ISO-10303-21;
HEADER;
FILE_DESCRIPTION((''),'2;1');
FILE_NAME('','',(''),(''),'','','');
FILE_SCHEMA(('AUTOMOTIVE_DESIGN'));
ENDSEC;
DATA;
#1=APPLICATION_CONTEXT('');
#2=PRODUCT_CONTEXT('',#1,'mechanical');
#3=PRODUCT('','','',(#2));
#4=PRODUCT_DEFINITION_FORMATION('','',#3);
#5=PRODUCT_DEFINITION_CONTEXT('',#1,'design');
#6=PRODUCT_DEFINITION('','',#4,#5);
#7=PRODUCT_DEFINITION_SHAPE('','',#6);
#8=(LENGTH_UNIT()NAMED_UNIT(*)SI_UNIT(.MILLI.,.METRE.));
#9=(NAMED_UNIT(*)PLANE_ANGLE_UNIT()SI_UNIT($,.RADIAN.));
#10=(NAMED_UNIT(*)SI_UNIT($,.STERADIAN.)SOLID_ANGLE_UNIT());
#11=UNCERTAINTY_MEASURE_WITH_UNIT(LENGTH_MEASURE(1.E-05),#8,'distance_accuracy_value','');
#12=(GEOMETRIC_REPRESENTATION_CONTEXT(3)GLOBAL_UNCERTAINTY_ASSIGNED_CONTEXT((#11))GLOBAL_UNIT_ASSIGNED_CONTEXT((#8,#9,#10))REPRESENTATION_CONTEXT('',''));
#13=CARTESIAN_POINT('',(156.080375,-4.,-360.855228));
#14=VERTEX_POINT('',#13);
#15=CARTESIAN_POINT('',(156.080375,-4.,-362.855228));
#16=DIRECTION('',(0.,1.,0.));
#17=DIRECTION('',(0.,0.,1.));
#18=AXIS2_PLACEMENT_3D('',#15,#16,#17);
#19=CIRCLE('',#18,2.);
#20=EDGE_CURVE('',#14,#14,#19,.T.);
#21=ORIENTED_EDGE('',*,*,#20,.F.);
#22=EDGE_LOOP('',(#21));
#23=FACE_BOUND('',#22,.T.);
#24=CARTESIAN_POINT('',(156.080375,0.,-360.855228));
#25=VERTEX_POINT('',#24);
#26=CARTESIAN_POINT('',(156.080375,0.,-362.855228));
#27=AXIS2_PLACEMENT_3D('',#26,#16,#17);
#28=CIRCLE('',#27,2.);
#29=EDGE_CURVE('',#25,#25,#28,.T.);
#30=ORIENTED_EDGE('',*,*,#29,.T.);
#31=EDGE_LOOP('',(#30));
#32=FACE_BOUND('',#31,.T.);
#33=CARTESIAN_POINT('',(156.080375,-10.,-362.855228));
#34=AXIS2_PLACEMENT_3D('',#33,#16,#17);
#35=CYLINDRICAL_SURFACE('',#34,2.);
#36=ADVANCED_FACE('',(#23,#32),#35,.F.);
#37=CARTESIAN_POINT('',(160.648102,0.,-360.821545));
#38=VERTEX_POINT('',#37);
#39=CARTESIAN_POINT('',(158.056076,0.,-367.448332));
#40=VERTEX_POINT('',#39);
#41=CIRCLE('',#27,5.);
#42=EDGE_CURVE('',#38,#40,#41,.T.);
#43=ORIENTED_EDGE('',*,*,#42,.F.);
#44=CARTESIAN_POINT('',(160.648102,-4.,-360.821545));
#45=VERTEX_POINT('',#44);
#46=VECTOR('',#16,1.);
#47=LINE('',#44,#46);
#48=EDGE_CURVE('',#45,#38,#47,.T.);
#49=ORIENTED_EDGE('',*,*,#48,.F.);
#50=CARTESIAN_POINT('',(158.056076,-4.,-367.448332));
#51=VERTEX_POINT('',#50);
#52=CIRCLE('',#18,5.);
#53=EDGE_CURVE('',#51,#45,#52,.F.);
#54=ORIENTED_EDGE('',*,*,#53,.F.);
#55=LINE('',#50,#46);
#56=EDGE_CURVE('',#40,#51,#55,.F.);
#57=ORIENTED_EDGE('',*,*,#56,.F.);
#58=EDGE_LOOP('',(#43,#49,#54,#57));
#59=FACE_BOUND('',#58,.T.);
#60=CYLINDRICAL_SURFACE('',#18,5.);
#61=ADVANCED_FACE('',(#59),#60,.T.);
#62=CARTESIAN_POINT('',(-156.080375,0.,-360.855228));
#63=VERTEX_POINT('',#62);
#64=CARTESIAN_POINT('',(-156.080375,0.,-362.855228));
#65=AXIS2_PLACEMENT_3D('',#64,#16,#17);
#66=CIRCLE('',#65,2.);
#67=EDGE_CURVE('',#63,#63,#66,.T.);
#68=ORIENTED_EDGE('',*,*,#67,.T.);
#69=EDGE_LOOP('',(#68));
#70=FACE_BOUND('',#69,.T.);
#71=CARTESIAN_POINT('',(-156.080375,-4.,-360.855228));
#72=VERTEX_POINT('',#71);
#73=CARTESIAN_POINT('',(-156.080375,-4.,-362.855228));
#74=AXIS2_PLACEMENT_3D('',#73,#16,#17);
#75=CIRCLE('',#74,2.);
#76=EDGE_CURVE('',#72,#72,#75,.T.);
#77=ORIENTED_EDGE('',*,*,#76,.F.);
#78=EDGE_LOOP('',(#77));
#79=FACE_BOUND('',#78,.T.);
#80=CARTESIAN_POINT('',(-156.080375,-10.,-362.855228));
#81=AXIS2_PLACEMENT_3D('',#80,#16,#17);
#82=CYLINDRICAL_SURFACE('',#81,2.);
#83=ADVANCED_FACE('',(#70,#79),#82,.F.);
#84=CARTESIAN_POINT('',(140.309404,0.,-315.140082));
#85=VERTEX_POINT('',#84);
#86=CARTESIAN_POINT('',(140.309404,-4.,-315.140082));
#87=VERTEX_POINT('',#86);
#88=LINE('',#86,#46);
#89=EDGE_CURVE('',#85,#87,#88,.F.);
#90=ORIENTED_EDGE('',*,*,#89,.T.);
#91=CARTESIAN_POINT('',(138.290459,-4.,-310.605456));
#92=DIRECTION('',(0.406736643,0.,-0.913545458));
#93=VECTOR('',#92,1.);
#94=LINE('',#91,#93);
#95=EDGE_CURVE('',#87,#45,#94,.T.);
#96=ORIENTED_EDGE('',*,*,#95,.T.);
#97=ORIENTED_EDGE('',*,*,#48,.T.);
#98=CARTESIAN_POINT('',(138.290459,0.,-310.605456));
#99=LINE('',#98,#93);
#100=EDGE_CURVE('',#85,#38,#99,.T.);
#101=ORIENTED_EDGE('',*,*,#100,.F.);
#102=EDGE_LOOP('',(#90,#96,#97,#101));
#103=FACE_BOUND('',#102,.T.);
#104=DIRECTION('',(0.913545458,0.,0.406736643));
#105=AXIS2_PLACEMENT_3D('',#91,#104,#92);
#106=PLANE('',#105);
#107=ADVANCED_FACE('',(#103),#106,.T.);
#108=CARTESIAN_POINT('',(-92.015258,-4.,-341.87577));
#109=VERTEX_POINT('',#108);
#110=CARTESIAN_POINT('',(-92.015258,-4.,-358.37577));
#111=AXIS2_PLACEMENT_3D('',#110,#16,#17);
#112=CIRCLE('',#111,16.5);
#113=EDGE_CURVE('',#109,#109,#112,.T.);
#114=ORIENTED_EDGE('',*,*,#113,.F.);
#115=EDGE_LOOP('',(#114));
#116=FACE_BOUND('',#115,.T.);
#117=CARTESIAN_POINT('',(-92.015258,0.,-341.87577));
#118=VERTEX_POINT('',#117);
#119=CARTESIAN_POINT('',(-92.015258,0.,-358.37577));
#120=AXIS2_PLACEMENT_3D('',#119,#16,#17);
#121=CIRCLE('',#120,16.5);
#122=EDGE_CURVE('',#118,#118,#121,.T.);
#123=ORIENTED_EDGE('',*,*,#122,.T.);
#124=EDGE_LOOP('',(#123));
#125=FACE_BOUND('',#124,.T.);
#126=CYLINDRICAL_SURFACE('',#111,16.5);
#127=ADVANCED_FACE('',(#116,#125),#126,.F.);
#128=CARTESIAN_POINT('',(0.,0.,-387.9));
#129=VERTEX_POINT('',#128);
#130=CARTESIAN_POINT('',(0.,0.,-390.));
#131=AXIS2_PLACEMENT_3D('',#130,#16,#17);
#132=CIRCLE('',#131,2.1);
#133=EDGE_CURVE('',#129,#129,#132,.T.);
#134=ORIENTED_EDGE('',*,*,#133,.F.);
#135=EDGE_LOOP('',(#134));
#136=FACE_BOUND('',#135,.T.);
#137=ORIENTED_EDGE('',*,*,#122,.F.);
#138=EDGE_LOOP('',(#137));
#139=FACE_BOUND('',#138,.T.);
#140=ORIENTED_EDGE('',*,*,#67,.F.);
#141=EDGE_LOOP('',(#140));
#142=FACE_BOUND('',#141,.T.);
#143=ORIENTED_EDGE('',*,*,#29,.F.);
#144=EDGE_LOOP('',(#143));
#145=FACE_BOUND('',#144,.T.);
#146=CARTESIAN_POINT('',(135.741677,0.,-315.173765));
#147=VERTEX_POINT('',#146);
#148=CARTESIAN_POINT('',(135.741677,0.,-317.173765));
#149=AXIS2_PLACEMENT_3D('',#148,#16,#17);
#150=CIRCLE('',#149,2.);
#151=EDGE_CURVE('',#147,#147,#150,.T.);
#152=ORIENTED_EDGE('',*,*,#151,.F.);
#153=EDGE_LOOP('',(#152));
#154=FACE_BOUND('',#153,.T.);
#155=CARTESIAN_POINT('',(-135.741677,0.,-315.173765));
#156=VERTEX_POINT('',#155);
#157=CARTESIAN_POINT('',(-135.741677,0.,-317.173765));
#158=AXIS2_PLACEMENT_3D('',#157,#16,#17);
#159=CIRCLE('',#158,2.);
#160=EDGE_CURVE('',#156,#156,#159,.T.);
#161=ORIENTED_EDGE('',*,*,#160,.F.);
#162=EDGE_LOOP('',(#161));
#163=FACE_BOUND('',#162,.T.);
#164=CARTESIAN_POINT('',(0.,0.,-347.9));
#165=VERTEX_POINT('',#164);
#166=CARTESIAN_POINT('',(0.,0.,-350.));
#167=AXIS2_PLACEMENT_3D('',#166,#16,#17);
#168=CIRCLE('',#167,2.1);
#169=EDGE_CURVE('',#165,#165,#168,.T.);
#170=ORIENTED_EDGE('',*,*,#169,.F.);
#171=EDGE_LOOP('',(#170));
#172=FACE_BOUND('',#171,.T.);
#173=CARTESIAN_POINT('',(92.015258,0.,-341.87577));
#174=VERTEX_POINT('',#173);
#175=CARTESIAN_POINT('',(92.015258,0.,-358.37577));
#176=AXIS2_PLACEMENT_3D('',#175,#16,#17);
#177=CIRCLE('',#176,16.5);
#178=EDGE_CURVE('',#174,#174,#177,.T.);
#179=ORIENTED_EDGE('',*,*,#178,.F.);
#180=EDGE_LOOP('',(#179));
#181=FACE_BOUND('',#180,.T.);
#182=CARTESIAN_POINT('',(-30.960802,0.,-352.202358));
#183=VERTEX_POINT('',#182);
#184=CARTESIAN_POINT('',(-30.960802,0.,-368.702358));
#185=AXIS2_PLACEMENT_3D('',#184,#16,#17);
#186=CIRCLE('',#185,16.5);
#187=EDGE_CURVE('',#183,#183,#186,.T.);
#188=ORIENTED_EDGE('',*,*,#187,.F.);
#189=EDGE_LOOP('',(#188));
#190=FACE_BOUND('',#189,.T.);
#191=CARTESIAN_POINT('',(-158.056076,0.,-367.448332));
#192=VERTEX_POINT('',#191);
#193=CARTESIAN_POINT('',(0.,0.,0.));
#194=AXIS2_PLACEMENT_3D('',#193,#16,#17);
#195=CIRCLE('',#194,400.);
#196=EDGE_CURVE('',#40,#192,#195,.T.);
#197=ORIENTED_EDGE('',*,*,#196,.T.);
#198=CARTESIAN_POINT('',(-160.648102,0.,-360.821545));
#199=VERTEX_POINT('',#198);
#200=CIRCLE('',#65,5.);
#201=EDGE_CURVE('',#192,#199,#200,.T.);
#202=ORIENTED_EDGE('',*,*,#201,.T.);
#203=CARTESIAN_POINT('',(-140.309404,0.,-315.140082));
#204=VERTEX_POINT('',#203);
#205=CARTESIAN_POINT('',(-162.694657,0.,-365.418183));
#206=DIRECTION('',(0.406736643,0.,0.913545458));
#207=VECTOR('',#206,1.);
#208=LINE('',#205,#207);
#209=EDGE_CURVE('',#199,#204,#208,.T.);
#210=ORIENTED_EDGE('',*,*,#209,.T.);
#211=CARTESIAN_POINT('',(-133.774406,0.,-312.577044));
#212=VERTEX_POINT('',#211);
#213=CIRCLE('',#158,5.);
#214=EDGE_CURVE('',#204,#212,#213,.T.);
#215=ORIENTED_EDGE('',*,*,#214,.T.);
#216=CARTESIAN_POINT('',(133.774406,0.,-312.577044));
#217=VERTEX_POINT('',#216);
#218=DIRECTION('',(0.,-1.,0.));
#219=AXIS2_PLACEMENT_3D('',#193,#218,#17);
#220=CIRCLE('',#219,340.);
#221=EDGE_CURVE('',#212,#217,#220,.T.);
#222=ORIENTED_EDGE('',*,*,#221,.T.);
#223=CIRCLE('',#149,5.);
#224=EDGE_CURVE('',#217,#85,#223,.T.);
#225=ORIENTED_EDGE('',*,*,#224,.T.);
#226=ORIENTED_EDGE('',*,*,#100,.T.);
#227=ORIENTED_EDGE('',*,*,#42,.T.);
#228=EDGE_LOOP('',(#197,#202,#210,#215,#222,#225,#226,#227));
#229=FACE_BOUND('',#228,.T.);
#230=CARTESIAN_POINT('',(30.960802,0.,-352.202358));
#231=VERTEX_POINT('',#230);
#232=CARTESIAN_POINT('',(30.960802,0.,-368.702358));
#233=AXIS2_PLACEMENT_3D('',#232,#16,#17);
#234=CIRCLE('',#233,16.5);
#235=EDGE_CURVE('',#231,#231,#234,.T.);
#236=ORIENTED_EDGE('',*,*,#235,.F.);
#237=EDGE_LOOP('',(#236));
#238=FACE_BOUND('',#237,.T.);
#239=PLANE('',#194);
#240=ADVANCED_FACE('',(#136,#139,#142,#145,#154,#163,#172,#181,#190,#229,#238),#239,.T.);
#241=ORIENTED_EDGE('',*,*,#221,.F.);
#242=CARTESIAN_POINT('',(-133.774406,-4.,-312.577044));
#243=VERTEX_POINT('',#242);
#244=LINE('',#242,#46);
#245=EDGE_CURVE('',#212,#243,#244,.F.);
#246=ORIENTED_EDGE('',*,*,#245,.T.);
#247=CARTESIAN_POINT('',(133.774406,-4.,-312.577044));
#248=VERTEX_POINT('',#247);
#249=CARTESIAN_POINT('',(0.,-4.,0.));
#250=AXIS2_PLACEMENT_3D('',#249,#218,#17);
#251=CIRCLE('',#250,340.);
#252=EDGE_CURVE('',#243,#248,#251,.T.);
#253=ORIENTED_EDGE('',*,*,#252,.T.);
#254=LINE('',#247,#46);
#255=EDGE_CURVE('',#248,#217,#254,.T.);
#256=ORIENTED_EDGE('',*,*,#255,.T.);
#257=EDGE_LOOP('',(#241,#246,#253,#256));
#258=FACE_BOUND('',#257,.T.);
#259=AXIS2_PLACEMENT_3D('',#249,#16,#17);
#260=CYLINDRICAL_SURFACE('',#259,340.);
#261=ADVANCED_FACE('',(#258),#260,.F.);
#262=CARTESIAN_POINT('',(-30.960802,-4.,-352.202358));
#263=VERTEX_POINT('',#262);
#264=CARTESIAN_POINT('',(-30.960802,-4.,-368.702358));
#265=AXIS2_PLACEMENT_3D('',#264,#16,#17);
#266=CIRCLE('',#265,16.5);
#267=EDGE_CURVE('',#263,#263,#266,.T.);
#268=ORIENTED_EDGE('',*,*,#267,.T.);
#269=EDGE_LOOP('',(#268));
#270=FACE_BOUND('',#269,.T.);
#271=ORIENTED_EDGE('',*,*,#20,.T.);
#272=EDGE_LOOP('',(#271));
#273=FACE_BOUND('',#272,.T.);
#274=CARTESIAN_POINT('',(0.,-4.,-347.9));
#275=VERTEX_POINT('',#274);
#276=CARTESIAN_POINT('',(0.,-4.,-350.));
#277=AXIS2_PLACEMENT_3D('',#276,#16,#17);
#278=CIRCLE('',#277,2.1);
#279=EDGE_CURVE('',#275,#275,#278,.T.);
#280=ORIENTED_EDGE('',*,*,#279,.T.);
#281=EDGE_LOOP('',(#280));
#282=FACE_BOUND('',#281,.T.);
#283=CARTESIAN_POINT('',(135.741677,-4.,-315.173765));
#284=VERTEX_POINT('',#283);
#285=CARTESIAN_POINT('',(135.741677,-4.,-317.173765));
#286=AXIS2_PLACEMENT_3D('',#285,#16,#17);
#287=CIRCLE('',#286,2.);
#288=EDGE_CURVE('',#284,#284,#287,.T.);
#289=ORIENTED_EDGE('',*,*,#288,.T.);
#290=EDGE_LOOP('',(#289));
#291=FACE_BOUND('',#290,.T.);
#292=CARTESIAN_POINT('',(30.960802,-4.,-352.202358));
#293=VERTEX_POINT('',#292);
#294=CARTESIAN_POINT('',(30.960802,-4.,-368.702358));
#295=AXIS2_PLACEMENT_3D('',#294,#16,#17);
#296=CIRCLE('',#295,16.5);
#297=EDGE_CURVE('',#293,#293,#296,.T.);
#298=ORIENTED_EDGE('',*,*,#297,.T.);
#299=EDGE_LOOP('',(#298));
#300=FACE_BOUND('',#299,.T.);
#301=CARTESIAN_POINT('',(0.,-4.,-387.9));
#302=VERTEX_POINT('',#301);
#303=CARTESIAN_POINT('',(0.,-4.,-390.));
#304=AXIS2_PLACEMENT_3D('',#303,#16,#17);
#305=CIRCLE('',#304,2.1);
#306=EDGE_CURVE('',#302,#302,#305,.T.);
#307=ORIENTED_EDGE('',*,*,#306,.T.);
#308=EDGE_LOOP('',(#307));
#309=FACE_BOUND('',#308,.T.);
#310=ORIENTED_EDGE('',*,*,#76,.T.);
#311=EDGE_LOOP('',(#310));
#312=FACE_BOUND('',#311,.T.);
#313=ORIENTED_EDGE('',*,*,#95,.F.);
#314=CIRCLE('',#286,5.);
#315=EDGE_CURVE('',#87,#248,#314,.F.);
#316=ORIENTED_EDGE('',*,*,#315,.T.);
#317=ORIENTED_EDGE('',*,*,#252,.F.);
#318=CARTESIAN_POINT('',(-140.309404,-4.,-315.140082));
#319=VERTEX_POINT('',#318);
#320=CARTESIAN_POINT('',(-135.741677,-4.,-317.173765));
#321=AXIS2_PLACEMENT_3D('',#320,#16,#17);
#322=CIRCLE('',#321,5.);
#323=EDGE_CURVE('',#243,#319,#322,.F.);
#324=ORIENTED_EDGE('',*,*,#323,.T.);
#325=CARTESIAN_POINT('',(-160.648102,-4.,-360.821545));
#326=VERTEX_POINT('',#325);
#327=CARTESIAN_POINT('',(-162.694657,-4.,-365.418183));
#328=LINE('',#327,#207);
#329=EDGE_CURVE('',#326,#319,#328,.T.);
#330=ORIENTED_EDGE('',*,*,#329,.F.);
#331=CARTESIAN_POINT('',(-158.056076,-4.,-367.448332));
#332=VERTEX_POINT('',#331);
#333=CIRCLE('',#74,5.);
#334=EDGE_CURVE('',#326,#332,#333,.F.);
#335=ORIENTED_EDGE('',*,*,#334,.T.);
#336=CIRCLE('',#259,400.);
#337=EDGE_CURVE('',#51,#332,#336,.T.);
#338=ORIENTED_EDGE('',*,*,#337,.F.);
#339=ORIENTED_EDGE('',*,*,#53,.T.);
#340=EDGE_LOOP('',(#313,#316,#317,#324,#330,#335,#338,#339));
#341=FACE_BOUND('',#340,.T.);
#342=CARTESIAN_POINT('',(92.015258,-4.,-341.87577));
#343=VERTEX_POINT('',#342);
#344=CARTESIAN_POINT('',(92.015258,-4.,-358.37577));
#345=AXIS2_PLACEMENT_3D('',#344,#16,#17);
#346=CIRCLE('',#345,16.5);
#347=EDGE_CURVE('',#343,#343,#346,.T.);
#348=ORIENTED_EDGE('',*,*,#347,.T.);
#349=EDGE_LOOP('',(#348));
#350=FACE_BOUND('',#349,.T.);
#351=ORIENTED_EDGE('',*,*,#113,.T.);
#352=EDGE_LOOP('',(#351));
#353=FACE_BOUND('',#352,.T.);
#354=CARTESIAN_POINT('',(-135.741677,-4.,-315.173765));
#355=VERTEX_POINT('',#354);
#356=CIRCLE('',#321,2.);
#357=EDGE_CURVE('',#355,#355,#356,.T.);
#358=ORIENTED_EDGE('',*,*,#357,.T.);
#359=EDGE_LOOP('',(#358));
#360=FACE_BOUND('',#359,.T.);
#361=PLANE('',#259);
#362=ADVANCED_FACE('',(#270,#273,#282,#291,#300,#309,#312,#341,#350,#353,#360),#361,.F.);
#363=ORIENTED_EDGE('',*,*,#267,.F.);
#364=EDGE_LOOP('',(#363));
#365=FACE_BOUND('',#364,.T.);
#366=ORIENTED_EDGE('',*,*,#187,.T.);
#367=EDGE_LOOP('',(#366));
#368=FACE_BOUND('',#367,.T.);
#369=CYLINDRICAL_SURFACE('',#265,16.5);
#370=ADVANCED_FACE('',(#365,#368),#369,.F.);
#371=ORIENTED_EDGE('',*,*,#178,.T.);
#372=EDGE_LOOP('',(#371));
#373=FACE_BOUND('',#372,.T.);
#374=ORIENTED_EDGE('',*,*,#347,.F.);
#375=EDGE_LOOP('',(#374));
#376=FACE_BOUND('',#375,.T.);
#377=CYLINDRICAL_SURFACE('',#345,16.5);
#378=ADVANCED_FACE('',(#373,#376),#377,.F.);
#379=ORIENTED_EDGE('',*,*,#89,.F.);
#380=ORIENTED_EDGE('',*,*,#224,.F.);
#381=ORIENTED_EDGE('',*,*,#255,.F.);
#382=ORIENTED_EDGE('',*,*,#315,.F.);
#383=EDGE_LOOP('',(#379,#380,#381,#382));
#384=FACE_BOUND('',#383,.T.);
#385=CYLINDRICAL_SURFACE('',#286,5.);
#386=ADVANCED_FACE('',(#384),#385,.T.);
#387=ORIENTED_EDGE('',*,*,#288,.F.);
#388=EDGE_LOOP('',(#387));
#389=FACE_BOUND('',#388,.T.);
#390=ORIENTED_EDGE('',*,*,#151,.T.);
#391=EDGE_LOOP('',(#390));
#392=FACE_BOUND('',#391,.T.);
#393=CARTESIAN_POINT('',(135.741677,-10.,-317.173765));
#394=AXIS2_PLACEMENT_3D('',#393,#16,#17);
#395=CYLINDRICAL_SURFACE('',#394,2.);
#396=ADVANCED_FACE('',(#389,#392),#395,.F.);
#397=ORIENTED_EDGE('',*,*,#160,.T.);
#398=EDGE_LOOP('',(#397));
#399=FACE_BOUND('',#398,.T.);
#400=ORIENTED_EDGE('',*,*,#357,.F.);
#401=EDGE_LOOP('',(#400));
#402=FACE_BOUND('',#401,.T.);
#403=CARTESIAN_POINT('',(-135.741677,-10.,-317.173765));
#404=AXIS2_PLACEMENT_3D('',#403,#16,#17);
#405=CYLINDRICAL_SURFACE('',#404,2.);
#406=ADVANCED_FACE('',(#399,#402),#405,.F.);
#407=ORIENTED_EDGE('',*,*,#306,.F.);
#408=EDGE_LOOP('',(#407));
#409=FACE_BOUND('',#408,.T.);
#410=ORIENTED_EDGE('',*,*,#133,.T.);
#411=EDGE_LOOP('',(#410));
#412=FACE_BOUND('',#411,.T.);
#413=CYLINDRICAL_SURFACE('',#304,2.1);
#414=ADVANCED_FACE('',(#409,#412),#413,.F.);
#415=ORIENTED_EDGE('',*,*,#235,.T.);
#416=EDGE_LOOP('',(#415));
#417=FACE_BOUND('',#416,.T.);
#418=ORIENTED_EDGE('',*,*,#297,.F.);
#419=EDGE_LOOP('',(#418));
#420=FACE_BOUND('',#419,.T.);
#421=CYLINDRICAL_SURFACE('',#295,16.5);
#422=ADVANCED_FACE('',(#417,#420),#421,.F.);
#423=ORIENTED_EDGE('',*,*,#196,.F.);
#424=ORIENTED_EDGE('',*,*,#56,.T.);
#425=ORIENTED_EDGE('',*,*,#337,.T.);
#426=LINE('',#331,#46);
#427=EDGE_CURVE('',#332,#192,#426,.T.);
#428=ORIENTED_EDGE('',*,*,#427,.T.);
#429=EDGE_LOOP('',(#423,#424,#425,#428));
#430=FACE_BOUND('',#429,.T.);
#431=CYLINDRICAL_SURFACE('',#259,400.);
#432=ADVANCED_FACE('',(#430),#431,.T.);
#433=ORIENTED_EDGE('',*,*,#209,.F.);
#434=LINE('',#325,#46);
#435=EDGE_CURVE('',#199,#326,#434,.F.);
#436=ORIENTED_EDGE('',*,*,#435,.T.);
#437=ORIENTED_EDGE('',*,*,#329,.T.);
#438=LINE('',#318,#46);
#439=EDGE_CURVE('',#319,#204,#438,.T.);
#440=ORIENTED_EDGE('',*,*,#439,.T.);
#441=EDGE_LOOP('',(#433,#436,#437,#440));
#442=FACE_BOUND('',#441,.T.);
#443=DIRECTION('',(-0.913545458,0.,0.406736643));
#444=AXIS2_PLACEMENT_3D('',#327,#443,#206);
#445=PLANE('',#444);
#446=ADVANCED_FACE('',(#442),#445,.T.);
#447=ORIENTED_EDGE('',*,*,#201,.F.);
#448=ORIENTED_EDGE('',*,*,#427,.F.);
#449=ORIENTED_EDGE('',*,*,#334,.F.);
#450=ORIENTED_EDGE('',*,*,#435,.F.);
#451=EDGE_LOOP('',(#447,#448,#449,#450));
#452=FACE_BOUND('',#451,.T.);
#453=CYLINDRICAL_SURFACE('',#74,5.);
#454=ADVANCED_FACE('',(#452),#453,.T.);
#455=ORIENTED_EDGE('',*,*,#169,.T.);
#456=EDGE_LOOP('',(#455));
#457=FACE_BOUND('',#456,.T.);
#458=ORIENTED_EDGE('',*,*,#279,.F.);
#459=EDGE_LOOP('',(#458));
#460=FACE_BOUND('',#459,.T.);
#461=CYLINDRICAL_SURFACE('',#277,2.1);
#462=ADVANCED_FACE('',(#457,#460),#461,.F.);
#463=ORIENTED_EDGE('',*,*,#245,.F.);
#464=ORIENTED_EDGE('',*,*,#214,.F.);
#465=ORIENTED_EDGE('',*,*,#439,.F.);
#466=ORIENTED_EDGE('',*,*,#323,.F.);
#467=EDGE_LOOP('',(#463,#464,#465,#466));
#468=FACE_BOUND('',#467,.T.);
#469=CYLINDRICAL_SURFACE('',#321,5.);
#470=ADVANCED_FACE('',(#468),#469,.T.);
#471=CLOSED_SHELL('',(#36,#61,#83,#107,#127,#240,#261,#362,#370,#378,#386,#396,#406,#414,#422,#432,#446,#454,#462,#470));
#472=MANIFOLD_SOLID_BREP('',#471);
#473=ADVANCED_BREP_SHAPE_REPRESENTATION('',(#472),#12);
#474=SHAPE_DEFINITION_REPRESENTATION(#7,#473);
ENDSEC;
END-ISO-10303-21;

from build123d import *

# Parameters (mm, degrees)
SKETCH_1_R             = 16.5
SKETCH_1_R_2           = 2.1
SM_BASE_FLANGE_1_DEPTH = 4
FILLET_1_R             = 5
SKETCH_2_R             = 2
CUT_EXTRUDE_1_DEPTH    = 10


# Sheet-metal steps are written as plain solids
with BuildPart() as part:
    # Sketch 1 → Базовая кромка1 (new body)
    with BuildSketch(Plane(origin=(0, 0, 0), x_dir=(1, 0, 0), z_dir=(0, 1, 0))):
        with BuildLine():
            Line((-162.69465723, 365.418183057), (-138.290458646, 310.605455598))
            ThreePointArc((-138.290458646, 310.605455598), (0, 340), (138.290458646, 310.605455598))
            Line((138.290458646, 310.605455598), (162.69465723, 365.418183057))
            ThreePointArc((162.69465723, 365.418183057), (0, 400), (-162.69465723, 365.418183057))
        make_face()
        with Locations(Location((30.960802033, 368.702357922, 0), (0, 0, 270))):
            Circle(SKETCH_1_R, mode=Mode.SUBTRACT)
        with Locations(Location((-30.960802033, 368.702357922, 0), (0, 0, 270))):
            Circle(SKETCH_1_R, mode=Mode.SUBTRACT)
        with Locations(Location((92.015258251, 358.375769618, 0), (0, 0, 270))):
            Circle(SKETCH_1_R, mode=Mode.SUBTRACT)
        with Locations(Location((-92.015258251, 358.375769618, 0), (0, 0, 270))):
            Circle(SKETCH_1_R, mode=Mode.SUBTRACT)
        with Locations(Location((0, 350, 0), (0, 0, 270))):
            Circle(SKETCH_1_R_2, mode=Mode.SUBTRACT)
        with Locations(Location((0, 390, 0), (0, 0, 270))):
            Circle(SKETCH_1_R_2, mode=Mode.SUBTRACT)
    extrude(amount=-SM_BASE_FLANGE_1_DEPTH)

    # Скругление1
    fillet_1_edges = [part.edges().sort_by_distance(p)[0] for p in [
        (-138.290458646, -2, -310.605455598),
        (-162.69465723, -2, -365.418183057),
        (162.69465723, -2, -365.418183057),
        (138.290458646, -2, -310.605455598),
    ]]
    fillet(fillet_1_edges, radius=FILLET_1_R)

    # Эскиз2 → Вырез-Вытянуть1 (cut)
    with BuildSketch(Plane(origin=(0, 0, 0), x_dir=(1, 0, 0), z_dir=(0, 1, 0))):
        with Locations(Location((156.080374798, 362.85522816, 0), (0, 0, 270))):
            Circle(SKETCH_2_R)
        with Locations(Location((135.741676964, 317.173764891, 0), (0, 0, 270))):
            Circle(SKETCH_2_R)
        with Locations(Location((-135.741676964, 317.173764891, 0), (0, 0, 270))):
            Circle(SKETCH_2_R)
        with Locations(Location((-156.080374798, 362.85522816, 0), (0, 0, 270))):
            Circle(SKETCH_2_R)
    extrude(amount=-CUT_EXTRUDE_1_DEPTH, mode=Mode.SUBTRACT)


solid = part.part
